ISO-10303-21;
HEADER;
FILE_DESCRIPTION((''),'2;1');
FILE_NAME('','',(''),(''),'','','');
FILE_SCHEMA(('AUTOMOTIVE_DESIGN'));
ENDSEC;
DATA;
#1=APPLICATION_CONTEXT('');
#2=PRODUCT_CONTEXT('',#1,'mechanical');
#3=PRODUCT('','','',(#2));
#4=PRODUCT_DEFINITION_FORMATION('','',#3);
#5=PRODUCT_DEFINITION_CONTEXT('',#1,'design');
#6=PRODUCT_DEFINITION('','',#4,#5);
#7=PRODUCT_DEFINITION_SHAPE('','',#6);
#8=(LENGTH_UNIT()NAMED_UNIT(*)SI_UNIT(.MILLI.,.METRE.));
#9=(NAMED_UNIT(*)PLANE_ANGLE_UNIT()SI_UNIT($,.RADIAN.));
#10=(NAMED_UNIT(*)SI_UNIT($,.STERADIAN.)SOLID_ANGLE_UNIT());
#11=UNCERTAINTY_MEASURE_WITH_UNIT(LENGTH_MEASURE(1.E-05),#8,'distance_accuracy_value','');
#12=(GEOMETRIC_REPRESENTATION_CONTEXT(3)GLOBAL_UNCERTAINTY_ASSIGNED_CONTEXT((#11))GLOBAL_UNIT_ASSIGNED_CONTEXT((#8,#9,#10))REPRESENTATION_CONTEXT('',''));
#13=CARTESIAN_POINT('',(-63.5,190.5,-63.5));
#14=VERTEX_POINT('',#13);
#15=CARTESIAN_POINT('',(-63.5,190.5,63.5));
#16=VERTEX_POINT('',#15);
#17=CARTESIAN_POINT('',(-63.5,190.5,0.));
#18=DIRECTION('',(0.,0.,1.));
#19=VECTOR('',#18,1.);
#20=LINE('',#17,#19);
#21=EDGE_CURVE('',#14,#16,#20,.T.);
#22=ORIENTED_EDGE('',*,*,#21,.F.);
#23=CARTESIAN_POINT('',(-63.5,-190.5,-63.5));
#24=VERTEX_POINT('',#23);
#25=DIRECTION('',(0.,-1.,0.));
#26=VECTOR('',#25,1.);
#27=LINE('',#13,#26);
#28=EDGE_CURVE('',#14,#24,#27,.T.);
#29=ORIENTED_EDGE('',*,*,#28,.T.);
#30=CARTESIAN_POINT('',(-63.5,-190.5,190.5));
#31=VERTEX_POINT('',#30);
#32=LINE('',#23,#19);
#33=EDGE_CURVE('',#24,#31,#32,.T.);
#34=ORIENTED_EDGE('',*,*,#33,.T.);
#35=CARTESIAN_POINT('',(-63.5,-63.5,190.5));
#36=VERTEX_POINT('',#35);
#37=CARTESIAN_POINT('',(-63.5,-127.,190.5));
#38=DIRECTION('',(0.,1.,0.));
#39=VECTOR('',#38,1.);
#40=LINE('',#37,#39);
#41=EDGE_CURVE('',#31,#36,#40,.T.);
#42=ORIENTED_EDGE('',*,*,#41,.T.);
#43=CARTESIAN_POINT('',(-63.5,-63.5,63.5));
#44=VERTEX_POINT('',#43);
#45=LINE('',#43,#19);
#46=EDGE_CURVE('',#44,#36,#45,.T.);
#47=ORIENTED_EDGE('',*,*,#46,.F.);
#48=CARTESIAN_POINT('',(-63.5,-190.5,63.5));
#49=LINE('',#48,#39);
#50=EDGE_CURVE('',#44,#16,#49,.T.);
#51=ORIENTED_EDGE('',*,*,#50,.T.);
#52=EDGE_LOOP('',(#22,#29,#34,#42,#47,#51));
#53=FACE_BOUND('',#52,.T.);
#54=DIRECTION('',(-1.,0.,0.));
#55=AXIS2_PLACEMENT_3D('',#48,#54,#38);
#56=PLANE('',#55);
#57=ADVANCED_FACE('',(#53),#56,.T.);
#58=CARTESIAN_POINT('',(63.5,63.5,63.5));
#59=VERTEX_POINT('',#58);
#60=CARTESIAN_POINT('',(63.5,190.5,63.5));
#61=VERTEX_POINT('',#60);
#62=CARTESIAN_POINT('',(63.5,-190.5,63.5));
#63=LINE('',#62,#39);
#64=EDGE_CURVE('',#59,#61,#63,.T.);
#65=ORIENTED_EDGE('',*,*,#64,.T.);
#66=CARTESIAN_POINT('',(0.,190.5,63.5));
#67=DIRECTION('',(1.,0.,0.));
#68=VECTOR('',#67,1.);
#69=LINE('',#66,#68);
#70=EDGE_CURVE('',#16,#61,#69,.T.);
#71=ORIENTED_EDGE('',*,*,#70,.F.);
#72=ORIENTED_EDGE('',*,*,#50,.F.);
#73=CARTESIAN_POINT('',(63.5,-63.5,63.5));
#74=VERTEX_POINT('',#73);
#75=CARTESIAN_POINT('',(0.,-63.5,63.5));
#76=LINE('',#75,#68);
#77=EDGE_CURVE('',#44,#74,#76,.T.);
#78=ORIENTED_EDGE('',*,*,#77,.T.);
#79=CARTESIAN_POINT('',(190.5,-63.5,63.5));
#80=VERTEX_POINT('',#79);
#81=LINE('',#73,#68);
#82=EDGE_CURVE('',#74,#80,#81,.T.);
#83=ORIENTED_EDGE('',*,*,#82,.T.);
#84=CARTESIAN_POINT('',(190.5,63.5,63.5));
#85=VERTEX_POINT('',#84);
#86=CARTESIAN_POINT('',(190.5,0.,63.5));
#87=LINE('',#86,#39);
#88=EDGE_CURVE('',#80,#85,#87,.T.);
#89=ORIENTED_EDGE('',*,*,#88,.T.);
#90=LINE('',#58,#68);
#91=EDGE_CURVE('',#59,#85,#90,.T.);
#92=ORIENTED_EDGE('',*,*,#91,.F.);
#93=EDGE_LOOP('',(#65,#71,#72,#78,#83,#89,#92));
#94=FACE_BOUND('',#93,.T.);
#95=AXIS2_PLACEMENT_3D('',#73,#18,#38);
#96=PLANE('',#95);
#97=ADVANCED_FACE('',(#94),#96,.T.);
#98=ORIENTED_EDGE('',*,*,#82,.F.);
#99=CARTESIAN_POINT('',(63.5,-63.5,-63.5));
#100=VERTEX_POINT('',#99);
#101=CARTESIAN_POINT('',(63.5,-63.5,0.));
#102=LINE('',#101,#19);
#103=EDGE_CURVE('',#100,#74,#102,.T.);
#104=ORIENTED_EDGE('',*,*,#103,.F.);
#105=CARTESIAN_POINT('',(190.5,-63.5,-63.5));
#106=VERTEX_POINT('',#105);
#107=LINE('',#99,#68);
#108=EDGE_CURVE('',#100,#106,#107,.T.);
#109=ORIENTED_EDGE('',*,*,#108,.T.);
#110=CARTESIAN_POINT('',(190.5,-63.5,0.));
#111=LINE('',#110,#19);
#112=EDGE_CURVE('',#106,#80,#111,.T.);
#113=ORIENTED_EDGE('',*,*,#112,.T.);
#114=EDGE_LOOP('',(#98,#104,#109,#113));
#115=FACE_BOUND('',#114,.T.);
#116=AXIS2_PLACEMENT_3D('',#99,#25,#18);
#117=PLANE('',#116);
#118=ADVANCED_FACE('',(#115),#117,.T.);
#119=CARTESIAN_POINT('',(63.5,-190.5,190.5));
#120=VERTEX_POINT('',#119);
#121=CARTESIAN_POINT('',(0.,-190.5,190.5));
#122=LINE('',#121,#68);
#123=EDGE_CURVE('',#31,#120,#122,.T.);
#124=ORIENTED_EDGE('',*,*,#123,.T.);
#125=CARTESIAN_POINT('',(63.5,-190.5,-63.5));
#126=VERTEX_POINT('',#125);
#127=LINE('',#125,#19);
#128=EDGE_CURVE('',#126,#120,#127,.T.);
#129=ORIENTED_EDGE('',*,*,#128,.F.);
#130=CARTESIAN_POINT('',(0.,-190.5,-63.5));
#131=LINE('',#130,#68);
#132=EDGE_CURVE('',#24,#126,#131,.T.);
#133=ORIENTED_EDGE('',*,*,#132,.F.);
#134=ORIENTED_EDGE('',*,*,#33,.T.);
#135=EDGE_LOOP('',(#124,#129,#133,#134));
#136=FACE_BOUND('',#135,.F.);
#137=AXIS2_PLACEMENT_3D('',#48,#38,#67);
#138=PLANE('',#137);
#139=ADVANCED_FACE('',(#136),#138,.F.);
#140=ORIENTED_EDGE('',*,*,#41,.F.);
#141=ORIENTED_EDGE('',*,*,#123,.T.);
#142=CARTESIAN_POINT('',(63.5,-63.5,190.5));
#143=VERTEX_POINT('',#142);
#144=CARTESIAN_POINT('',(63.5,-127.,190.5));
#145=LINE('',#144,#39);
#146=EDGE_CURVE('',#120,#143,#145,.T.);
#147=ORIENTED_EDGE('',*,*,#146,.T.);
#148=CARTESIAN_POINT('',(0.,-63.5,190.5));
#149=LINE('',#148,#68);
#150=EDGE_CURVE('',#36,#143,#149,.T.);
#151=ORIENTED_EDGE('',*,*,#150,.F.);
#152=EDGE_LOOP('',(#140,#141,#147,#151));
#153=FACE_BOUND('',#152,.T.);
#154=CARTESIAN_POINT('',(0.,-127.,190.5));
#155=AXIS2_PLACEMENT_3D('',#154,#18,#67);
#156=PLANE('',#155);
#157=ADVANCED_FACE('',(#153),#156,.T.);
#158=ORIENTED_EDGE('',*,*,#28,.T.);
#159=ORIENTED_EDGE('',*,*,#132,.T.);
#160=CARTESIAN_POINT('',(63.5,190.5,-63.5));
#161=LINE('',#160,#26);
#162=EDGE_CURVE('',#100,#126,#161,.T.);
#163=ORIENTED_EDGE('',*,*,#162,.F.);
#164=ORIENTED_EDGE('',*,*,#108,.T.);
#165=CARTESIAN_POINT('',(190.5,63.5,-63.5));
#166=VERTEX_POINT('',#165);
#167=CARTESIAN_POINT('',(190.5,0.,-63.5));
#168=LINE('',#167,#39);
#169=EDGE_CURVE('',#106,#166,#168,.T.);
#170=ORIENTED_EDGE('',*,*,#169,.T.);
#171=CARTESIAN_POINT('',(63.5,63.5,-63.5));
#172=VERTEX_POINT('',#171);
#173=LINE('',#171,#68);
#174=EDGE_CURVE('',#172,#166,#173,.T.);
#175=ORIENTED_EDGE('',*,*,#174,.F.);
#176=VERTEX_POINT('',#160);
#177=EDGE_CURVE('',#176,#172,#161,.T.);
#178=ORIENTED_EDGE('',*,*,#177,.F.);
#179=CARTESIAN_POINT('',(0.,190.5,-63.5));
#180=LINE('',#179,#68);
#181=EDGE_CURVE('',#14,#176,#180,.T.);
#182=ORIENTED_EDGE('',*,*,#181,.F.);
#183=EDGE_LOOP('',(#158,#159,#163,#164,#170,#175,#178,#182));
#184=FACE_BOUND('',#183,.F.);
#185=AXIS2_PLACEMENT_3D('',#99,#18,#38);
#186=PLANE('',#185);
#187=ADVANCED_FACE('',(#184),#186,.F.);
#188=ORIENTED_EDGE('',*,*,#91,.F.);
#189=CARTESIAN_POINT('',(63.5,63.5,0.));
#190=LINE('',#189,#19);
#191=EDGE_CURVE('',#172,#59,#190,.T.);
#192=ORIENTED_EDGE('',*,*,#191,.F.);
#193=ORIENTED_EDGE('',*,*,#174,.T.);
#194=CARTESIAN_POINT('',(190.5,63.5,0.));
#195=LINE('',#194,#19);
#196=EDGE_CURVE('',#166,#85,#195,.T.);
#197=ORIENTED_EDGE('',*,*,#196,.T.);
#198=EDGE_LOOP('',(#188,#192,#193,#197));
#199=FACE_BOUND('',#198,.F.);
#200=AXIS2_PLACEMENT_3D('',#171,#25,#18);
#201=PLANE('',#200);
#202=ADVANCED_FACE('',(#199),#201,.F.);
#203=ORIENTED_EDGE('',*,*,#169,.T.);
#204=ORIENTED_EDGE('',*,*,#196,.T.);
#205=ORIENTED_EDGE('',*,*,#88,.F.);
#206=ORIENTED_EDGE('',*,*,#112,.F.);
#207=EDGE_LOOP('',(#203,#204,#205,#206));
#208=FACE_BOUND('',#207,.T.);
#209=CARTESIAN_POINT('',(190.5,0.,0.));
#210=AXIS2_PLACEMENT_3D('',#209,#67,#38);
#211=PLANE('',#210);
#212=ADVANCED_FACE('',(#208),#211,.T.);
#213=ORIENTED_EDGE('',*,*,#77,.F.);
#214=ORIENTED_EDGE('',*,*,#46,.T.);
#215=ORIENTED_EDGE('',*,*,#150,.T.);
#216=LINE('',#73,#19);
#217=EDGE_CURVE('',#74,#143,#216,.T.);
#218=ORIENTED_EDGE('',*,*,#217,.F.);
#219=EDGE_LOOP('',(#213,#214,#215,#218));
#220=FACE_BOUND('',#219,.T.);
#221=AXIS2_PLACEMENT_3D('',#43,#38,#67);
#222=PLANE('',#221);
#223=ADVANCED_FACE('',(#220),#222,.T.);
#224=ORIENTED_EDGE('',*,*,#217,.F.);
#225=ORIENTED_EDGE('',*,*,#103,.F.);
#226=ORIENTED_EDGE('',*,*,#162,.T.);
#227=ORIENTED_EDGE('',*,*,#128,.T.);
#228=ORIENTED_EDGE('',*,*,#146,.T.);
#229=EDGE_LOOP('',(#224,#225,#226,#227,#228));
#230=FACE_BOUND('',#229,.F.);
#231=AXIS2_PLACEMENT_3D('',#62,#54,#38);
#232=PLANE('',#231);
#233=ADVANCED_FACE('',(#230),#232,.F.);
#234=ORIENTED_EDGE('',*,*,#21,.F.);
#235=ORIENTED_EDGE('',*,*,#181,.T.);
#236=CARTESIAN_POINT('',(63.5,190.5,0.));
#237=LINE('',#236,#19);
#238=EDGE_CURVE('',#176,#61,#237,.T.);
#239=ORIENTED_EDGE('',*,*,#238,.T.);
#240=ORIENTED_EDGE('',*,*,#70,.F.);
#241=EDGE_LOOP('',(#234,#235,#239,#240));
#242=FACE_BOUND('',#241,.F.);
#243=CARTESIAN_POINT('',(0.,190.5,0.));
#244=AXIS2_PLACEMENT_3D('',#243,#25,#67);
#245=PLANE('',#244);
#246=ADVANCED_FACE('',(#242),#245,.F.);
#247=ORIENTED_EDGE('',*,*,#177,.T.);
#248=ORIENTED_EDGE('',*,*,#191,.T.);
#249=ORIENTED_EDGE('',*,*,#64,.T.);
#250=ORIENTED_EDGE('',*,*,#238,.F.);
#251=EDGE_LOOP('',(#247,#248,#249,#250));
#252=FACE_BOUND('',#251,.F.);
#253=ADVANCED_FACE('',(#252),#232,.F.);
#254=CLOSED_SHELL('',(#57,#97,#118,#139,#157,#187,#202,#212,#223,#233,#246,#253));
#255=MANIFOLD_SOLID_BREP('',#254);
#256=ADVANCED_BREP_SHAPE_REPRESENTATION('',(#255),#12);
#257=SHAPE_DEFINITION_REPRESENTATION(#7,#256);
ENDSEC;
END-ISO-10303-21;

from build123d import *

# Parameters (mm, degrees)
F1_W     = 127
F1_H     = 127
F2_DEPTH = 190.5
F3_W     = 127
F3_H     = 127
F4_DEPTH = 127
F5_W     = 127
F5_H     = 127
F6_DEPTH = 127


# Not quite as in the source:
# - a variable given as a bare number and used for a length is read in inches; the dataset says mm whatever the document's units were


with BuildPart() as f2:
    # F1 (on Front) → F2 (new body, symmetric)
    with BuildSketch(Plane.XZ):
        Rectangle(F1_W, F1_H)
    extrude(amount=F2_DEPTH, both=True)

    # F3 (on face) → F4 (join)
    with BuildSketch(Plane.XY.offset(63.5)):
        with Locations((0, -127)):
            Rectangle(F3_W, F3_H)
    extrude(amount=F4_DEPTH)

    # F5 (on face) → F6 (join)
    with BuildSketch(Plane.YZ.offset(63.5)):
        Rectangle(F5_W, F5_H)
    extrude(amount=F6_DEPTH)


solid = f2.part
